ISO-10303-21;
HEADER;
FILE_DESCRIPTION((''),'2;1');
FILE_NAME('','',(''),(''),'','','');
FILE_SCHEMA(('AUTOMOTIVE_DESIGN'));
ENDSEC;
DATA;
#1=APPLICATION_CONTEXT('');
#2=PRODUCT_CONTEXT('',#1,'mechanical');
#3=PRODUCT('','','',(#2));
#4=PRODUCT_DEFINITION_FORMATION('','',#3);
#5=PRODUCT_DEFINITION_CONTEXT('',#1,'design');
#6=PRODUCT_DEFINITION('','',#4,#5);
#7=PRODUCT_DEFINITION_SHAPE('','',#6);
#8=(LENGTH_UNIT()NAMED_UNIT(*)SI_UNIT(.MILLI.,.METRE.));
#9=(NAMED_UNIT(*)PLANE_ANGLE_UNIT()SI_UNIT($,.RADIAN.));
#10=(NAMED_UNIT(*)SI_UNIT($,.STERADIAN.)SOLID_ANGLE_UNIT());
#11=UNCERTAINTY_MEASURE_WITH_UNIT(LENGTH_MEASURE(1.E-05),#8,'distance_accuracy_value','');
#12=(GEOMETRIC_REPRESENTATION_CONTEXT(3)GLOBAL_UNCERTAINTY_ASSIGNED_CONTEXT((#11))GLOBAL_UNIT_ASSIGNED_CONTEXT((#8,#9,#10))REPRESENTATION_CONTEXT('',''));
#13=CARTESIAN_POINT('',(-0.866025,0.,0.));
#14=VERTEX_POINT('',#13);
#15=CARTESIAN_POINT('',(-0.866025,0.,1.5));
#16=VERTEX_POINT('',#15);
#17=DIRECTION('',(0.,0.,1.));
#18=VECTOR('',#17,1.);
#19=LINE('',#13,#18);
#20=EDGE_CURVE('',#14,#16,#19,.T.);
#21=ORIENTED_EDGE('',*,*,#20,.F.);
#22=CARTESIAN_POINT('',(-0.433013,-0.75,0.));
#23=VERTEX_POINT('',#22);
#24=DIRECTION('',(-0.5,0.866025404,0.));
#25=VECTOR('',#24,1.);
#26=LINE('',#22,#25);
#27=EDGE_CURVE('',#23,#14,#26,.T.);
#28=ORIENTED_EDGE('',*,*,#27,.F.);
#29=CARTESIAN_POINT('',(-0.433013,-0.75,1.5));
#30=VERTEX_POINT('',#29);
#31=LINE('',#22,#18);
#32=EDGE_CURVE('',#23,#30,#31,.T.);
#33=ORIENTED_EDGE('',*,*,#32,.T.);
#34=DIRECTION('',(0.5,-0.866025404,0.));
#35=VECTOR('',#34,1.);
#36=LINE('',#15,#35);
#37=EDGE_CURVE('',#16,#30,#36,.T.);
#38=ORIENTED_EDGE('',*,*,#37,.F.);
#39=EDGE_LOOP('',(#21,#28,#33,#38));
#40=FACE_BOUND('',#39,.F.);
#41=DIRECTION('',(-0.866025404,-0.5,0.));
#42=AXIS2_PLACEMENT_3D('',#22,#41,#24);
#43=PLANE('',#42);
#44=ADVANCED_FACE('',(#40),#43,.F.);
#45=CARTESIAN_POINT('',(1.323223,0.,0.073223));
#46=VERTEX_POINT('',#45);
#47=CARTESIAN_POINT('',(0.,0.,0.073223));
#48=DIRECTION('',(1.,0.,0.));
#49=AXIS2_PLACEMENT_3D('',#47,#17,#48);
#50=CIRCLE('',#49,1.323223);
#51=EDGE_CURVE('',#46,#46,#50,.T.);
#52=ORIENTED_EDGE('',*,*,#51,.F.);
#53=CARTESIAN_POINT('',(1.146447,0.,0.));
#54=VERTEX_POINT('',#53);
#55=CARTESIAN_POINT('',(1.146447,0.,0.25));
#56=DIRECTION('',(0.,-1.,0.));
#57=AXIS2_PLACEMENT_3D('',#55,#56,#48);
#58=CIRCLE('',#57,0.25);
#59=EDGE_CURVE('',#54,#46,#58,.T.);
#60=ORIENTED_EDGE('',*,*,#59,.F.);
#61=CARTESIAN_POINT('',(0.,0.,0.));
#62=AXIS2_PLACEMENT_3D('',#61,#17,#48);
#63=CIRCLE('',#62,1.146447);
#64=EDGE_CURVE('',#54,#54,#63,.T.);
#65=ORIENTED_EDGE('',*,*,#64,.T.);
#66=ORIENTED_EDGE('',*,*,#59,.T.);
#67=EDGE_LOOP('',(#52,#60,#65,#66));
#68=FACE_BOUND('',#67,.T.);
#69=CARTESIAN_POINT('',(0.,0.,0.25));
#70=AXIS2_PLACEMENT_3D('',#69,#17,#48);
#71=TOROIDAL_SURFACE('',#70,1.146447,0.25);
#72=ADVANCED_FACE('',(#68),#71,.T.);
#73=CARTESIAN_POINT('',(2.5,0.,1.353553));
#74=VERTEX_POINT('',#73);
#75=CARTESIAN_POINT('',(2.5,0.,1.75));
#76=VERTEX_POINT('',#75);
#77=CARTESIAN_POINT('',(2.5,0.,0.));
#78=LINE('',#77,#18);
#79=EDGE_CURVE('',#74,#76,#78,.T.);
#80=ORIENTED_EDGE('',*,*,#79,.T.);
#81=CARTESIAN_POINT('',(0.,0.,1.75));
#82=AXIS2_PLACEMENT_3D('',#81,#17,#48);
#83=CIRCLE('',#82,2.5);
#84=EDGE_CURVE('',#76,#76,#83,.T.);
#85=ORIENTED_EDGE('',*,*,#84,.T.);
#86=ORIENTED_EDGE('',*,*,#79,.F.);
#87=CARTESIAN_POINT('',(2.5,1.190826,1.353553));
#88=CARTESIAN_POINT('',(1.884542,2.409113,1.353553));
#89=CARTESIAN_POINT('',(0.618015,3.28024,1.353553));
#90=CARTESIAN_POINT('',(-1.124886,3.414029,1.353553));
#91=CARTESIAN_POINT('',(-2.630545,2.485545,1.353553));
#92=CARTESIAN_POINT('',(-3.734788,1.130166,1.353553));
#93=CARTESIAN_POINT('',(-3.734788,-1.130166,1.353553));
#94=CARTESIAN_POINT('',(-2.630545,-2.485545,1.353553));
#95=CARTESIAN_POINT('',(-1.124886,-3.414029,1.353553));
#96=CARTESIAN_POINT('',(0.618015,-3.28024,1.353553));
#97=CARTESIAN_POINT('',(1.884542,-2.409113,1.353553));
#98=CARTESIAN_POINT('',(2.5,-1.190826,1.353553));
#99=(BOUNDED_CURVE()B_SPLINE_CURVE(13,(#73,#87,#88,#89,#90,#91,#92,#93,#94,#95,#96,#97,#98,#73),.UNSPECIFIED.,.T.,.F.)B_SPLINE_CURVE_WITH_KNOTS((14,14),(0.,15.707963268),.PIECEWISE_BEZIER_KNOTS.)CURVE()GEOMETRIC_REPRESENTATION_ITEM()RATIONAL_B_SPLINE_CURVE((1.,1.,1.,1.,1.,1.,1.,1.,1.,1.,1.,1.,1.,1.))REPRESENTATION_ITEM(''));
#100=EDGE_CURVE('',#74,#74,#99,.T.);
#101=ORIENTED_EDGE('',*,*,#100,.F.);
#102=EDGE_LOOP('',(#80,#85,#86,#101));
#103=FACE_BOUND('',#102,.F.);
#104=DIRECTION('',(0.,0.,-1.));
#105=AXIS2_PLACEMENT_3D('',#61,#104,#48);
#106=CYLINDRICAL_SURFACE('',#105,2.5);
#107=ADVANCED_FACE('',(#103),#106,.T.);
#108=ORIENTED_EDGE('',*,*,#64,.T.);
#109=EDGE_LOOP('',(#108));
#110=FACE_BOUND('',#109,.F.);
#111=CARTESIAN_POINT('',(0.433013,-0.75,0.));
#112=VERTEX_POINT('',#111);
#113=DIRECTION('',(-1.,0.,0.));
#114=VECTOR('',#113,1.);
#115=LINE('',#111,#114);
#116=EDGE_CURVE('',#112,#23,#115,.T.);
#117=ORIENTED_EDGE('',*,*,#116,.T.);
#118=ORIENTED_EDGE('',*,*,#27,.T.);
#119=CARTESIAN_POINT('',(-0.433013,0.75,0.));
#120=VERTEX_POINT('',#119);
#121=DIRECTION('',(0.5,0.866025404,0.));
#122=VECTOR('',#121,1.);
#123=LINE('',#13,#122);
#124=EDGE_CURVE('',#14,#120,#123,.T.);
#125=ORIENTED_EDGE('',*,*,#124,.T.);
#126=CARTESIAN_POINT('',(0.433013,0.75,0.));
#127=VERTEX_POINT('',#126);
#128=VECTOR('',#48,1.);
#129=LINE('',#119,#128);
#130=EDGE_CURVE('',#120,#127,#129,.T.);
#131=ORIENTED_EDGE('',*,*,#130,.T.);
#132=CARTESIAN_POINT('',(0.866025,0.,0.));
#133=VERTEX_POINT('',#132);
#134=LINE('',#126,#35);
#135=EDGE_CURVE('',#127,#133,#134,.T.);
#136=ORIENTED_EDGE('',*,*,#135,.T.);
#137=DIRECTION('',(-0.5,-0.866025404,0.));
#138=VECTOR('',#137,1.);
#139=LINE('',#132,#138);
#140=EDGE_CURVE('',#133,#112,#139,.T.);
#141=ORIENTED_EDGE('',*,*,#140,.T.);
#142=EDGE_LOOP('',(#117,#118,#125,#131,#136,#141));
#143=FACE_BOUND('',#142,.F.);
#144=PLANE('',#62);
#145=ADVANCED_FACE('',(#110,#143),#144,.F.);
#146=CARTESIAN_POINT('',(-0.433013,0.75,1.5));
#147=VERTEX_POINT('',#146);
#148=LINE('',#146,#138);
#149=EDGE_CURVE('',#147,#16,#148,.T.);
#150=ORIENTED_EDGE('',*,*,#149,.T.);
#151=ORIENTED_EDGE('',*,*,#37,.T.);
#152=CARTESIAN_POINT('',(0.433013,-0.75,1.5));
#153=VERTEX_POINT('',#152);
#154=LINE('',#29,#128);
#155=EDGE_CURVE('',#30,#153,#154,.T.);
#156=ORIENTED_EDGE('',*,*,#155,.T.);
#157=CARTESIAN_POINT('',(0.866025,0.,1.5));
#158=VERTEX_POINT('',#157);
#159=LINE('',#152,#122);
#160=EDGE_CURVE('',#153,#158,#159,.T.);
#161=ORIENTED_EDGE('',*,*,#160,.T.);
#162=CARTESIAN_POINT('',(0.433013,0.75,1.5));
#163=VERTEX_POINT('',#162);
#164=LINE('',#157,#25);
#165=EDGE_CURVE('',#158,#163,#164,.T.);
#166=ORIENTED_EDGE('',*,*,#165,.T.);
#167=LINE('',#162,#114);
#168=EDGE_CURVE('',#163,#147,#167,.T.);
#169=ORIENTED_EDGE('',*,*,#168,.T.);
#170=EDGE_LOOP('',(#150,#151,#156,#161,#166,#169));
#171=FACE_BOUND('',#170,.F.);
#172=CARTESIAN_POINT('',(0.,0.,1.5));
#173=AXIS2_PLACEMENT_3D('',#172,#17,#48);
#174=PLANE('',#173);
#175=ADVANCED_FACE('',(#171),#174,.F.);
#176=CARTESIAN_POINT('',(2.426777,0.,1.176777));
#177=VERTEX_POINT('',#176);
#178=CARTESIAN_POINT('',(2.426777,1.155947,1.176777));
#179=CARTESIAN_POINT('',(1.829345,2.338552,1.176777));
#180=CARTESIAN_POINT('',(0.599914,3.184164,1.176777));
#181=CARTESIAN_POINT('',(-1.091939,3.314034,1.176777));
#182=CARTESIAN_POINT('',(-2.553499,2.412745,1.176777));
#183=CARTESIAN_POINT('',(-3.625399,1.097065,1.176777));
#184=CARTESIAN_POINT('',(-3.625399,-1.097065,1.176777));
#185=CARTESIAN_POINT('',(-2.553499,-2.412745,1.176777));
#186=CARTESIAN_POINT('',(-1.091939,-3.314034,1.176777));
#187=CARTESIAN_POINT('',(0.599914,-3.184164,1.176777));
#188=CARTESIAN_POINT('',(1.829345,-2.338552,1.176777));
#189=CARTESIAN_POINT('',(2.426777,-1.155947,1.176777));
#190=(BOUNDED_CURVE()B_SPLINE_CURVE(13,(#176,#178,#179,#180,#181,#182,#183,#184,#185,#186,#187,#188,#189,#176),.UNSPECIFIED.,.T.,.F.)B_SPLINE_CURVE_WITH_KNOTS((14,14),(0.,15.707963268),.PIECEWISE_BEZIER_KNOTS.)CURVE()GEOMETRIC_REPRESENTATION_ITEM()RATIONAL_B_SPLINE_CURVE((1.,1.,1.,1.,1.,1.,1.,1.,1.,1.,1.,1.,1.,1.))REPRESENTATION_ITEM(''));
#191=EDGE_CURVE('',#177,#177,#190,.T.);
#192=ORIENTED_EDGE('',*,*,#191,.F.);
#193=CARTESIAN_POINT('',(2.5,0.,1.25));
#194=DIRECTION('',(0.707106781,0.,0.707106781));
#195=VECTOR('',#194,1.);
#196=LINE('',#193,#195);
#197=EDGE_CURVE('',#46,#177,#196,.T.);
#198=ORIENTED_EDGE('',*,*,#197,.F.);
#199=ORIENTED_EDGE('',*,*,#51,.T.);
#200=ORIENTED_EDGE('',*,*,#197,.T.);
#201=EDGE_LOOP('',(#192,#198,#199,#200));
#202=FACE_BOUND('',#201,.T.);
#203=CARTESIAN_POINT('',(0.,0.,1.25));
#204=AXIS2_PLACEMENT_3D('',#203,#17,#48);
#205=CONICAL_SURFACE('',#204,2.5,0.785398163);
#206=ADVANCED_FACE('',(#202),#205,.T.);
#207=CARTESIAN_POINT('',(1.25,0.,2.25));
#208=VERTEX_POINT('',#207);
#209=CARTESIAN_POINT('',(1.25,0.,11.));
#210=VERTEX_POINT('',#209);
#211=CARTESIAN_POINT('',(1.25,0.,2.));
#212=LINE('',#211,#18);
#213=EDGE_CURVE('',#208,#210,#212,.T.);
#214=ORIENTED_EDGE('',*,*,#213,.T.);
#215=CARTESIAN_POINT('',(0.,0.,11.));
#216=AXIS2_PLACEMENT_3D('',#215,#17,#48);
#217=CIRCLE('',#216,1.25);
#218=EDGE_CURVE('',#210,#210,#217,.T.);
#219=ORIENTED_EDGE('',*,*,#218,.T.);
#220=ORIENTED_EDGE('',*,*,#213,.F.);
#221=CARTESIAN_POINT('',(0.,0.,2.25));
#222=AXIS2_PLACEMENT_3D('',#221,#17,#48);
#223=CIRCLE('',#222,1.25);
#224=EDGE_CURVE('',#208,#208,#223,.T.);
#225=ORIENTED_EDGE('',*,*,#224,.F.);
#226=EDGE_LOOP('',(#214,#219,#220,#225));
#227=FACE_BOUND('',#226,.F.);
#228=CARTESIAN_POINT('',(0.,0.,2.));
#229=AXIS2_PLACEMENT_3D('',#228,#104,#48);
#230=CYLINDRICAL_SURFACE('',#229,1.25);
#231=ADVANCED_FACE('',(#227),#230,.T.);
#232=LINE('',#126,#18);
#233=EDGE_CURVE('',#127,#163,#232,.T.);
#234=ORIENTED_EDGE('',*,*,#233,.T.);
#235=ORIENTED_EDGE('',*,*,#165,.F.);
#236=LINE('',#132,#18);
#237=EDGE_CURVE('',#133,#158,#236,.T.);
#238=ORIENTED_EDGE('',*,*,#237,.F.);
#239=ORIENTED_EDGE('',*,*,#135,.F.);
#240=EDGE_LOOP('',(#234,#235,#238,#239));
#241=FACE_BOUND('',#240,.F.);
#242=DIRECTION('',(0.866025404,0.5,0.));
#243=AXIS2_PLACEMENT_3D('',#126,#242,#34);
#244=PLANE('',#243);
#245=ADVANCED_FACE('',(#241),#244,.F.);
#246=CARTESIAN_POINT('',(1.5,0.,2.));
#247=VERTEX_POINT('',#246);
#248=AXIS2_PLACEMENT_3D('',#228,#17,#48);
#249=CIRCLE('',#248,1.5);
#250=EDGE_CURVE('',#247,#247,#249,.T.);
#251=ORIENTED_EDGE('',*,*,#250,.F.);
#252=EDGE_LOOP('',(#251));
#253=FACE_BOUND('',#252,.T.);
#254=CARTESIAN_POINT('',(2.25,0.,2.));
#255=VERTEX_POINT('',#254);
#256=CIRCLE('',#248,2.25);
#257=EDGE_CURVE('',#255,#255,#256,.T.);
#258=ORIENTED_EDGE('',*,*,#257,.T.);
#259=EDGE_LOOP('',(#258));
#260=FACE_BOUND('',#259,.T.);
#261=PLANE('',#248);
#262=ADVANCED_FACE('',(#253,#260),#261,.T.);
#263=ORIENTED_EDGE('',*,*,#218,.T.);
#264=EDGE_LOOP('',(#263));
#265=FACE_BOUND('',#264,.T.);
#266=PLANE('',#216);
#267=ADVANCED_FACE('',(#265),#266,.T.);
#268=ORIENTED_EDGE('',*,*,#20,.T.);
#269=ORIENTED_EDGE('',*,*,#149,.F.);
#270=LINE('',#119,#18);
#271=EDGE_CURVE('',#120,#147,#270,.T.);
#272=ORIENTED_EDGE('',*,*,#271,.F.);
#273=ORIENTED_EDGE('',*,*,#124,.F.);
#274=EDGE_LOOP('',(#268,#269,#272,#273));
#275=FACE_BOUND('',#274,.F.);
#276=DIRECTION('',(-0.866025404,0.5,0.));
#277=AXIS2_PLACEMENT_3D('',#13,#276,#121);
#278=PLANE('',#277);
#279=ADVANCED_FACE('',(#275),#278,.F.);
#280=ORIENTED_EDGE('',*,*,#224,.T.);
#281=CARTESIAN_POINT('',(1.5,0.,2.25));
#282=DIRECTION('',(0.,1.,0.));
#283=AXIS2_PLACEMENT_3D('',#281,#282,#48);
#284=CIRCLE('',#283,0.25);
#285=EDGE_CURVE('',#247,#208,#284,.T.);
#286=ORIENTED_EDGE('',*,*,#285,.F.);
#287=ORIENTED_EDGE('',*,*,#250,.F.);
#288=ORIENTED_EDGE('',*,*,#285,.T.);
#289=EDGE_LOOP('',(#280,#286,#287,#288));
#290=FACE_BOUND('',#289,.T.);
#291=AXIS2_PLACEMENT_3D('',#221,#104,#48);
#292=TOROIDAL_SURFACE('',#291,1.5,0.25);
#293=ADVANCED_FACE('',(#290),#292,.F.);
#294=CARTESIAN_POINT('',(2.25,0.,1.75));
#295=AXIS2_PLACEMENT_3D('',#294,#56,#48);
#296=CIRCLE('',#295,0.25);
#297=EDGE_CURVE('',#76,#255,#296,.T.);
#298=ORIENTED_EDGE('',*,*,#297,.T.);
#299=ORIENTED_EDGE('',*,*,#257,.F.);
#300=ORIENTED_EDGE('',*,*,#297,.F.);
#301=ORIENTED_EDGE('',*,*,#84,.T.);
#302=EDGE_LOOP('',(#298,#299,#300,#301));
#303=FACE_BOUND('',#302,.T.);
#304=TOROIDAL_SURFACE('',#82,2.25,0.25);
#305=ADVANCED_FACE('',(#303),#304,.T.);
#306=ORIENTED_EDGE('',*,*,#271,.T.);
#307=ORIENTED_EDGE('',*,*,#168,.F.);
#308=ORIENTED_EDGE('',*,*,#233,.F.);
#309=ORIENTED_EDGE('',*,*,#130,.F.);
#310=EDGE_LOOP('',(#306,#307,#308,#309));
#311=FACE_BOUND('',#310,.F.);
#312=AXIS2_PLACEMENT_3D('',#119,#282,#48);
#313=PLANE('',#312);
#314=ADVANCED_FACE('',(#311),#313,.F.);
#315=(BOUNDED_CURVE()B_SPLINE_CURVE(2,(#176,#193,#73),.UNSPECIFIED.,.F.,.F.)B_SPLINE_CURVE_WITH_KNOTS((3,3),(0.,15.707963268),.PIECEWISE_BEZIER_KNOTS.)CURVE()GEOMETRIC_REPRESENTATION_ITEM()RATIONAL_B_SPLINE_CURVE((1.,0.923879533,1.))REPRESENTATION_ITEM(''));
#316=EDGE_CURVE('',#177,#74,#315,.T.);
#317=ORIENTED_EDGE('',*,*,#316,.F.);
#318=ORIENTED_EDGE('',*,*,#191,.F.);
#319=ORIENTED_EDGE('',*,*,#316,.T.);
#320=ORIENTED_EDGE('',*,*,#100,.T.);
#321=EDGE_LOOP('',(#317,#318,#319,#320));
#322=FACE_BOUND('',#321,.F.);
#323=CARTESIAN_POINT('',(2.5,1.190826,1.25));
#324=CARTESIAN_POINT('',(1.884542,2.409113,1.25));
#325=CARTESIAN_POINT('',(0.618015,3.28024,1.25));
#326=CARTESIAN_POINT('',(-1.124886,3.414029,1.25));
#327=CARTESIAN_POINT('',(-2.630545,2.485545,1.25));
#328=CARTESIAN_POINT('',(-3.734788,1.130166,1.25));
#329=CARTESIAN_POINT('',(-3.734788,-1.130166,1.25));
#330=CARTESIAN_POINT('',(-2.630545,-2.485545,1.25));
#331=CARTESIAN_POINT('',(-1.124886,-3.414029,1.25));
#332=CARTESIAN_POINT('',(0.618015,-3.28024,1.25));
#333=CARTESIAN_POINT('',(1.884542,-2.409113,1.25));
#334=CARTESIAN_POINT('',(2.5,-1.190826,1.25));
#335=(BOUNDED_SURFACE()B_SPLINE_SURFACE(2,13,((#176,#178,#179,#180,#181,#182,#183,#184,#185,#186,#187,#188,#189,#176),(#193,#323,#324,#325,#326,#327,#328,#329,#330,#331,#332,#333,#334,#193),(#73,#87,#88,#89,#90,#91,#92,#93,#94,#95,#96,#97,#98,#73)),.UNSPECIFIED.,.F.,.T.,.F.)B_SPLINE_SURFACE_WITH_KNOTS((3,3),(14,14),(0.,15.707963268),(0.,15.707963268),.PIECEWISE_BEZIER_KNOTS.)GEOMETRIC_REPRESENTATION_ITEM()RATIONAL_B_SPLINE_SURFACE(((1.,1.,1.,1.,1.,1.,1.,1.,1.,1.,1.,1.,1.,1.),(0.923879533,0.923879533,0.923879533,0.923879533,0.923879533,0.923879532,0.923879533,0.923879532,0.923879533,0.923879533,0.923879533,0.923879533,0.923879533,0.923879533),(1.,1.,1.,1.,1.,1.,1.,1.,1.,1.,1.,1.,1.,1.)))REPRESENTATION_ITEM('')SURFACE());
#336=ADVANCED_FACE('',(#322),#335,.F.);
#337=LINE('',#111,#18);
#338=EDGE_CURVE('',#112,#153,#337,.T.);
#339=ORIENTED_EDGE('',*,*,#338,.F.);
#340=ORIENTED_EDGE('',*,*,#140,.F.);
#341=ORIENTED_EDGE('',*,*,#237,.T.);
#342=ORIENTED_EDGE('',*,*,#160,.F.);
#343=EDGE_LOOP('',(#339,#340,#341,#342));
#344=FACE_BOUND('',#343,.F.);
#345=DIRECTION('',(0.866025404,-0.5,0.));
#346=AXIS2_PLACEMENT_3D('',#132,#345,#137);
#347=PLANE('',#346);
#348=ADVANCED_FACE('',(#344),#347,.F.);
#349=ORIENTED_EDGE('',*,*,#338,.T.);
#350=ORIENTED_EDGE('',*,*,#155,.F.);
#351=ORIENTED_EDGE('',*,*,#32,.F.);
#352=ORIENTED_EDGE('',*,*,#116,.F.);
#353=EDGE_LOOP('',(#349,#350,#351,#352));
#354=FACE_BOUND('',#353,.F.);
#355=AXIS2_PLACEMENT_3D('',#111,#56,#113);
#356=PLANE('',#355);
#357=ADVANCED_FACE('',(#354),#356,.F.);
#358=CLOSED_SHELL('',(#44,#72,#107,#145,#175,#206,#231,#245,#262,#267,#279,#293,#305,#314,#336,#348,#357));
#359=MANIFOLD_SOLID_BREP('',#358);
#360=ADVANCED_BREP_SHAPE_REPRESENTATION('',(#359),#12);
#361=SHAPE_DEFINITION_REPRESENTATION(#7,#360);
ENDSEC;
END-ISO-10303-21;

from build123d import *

# Parameters (mm, degrees)
F1_R     = 2.5
F1_R_2   = 1.25
F2_DEPTH = 2
F3_START = 1.5
F3_DEPTH = 0.5
F4_START = 2
F4_DEPTH = 9
F5_SIZE2 = 1.25
F5_SIZE  = 1.25
F6_R     = 0.25


# Not quite as in the source:
# - a feature names something its author has since deleted; it is built from what else it names


with BuildPart() as f2:
    # F1 (on Top) → F2 (new body)
    with BuildSketch(Plane.XY):
        Circle(F1_R)
        Circle(F1_R_2, mode=Mode.SUBTRACT)
        Circle(F1_R_2)
        Polygon((-0.4330127019, -0.75), (-0.8660254038, 0), (-0.4330127019, 0.75), (0.4330127019, 0.75), (0.8660254038, 0), (0.4330127019, -0.75), align=None, mode=Mode.SUBTRACT)
    extrude(amount=F2_DEPTH)

    # F1 (on Top) → F3 (join)
    with BuildSketch(Plane.XY.offset(F3_START)):
        Polygon((-0.4330127019, 0.75), (-0.8660254038, 0), (-0.4330127019, -0.75), (0.4330127019, -0.75), (0.8660254038, 0), (0.4330127019, 0.75), align=None)
    extrude(amount=F3_DEPTH)

    # F1 (on Top) → F4 (join)
    with BuildSketch(Plane.XY.offset(F4_START)):
        Circle(F1_R_2)
        Polygon((-0.4330127019, -0.75), (-0.8660254038, 0), (-0.4330127019, 0.75), (0.4330127019, 0.75), (0.8660254038, 0), (0.4330127019, -0.75), align=None, mode=Mode.SUBTRACT)
        Polygon((-0.4330127019, 0.75), (-0.8660254038, 0), (-0.4330127019, -0.75), (0.4330127019, -0.75), (0.8660254038, 0), (0.4330127019, 0.75), align=None)
    extrude(amount=F4_DEPTH)

    # F5
    f5_edges = [f2.edges().sort_by_distance(p)[0] for p in [
        (-2.5, 0, 0),
    ]]
    chamfer(f5_edges, length=F5_SIZE, length2=F5_SIZE2)

    # F6
    f6_edges = [f2.edges().sort_by_distance(p)[0] for p in [
        (-2.5, 0, 2),
        (-1.25, 0, 2),
        (-1.25, 0, 0),
        (-2.5, 0, 1.25),
    ]]
    fillet(f6_edges, radius=F6_R)


solid = f2.part
